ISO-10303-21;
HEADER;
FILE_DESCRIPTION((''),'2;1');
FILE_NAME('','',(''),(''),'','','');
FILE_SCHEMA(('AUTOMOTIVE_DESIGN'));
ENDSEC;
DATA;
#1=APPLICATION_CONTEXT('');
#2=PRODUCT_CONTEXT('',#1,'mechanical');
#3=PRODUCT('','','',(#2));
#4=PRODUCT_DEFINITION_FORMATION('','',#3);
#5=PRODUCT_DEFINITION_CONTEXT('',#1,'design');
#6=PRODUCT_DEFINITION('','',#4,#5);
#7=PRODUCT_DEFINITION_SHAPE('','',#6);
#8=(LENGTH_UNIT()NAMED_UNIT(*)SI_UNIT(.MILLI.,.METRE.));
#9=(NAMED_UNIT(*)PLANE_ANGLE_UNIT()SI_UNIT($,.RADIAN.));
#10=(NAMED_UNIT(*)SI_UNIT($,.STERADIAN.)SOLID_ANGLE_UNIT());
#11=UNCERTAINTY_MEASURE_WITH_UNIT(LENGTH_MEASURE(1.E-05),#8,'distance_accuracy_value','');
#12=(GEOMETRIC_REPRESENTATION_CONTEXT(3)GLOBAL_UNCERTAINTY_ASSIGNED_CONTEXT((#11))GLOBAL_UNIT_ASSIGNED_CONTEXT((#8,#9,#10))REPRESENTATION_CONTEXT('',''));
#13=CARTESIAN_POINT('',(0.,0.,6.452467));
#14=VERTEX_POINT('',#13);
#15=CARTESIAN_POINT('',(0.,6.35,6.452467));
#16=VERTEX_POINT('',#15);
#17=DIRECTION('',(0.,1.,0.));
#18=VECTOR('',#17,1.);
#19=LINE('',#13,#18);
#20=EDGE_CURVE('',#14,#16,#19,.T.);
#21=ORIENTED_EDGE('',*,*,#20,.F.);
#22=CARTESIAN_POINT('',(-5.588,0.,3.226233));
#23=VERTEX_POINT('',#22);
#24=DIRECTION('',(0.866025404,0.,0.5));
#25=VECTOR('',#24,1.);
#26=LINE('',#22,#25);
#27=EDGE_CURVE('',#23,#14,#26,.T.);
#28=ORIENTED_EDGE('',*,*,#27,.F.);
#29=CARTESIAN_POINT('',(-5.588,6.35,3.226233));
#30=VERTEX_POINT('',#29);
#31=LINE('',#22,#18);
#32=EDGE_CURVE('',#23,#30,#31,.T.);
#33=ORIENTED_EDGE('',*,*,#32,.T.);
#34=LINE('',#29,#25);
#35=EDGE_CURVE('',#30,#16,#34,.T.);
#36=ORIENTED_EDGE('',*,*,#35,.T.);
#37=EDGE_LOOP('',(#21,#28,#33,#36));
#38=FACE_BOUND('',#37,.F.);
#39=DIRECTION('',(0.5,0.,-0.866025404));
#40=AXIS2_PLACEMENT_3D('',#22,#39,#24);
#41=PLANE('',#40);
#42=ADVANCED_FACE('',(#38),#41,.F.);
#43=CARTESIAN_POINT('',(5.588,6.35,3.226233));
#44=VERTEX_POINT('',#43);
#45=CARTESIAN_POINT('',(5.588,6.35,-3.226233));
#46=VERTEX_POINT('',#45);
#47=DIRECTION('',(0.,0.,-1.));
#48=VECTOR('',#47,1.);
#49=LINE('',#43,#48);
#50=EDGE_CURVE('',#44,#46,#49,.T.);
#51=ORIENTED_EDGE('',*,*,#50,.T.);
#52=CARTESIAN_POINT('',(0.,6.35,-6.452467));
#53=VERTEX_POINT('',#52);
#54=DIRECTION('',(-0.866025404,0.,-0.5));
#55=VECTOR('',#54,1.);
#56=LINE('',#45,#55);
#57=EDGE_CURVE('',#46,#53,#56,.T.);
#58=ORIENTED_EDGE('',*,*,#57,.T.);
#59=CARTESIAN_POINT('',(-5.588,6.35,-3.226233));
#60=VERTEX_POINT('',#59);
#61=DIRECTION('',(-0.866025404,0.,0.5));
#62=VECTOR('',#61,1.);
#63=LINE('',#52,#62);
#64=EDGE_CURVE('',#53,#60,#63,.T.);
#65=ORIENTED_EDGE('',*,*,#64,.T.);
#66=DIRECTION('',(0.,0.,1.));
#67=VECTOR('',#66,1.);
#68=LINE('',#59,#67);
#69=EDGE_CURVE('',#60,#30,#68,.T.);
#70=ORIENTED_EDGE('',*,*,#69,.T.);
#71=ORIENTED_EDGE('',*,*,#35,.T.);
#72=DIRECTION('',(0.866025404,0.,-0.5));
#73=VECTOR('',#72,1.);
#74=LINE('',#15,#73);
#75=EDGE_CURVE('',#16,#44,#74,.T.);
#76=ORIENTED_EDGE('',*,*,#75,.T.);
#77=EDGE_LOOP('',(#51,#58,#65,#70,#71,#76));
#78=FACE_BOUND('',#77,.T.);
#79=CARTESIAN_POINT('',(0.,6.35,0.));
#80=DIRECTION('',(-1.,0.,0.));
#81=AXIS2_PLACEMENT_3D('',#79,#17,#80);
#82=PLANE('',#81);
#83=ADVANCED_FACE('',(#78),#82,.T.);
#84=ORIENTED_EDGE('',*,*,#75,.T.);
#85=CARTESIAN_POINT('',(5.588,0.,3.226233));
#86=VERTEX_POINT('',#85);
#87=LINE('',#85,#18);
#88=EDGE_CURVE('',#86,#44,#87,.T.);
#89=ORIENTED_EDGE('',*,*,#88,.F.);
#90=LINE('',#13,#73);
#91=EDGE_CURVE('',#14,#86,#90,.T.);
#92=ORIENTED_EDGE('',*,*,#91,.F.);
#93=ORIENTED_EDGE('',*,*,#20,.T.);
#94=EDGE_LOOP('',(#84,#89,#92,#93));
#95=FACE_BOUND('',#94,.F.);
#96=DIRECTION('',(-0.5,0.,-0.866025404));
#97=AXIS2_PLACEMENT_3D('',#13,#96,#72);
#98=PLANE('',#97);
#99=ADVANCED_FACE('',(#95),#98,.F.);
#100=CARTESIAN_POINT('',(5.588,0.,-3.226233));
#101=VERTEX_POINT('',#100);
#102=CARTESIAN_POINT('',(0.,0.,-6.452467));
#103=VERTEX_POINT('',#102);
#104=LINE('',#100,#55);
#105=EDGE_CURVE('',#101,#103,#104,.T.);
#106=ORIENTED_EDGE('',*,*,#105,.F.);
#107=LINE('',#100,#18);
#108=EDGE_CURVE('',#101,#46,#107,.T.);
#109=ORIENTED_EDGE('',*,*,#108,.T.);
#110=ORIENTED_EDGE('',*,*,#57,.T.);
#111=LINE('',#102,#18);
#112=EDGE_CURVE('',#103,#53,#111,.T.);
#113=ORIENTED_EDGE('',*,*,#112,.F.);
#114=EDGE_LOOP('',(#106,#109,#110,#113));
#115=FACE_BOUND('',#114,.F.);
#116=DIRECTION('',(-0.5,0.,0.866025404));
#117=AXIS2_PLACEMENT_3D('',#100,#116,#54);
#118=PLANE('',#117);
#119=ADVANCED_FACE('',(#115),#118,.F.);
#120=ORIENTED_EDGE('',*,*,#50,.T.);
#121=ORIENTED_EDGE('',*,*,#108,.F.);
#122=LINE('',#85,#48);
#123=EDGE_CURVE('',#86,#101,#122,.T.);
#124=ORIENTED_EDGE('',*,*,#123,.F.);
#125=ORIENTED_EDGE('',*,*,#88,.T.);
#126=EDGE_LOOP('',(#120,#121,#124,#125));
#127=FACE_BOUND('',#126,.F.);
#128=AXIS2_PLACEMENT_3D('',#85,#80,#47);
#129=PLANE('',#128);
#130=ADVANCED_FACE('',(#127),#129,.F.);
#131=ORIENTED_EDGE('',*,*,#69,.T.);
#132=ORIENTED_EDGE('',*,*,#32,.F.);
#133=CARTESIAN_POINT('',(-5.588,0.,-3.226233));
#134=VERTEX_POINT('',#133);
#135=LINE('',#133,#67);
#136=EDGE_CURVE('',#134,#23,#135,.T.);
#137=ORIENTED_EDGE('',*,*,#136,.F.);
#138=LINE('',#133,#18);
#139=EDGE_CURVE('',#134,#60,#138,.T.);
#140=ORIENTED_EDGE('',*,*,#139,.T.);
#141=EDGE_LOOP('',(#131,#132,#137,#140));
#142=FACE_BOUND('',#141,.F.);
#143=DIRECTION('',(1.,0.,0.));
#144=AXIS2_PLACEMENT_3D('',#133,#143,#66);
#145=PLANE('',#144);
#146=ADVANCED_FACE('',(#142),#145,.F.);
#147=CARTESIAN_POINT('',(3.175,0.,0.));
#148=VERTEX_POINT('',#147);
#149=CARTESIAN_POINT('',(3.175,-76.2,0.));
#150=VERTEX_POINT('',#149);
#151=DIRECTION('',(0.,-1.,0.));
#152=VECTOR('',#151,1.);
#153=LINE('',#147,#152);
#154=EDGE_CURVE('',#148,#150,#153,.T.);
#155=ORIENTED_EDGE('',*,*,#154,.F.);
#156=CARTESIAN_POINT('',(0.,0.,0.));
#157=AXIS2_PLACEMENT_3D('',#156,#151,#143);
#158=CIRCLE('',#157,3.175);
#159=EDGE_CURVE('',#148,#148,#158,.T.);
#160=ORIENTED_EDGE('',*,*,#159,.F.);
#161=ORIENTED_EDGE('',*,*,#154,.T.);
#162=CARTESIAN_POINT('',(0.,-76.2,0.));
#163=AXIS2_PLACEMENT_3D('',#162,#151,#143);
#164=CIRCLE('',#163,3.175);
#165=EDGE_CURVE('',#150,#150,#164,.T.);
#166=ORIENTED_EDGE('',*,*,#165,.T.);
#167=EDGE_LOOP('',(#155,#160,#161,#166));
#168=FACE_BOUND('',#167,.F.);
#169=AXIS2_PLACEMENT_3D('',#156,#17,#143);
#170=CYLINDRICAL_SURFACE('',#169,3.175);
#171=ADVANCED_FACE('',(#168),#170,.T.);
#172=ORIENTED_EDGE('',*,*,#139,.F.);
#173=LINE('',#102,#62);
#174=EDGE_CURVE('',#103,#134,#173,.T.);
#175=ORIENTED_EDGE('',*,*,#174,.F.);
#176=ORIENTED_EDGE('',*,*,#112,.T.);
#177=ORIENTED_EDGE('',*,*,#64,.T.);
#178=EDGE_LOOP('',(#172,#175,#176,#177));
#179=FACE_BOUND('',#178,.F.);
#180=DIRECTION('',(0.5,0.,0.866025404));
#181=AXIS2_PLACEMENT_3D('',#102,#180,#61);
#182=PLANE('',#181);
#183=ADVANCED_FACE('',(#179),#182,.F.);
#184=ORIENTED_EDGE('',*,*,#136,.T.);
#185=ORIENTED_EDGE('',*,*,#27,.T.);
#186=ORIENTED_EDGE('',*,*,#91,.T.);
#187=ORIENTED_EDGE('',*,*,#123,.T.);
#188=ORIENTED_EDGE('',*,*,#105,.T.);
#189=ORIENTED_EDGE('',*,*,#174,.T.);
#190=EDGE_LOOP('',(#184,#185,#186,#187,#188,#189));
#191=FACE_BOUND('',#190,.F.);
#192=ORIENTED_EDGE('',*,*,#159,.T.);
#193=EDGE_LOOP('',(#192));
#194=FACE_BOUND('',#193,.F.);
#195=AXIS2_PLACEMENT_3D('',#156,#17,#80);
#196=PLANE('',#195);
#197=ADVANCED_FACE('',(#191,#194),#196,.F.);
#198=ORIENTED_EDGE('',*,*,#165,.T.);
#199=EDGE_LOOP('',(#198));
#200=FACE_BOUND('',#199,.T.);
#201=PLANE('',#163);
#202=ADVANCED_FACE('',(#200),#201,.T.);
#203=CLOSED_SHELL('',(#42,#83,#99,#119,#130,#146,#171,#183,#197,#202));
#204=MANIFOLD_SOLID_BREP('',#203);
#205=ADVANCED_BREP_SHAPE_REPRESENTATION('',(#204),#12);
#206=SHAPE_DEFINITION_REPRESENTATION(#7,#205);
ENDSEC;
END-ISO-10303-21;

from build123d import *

# Parameters (mm, degrees)
F0_R     = 3.175
F1_DEPTH = 76.2
F2_R     = 3.175
F3_DEPTH = 6.35


with BuildPart() as f1:
    # F0 (on Front) → F1 (new body)
    with BuildSketch(Plane.XZ):
        Circle(F0_R)
    extrude(amount=F1_DEPTH)

    # F2 (on face) → F3 (join)
    with BuildSketch(Plane(origin=(0, 0, 0), x_dir=(-1, 0, 0), z_dir=(0, 1, 0))):
        Polygon((5.588, -3.2262333042), (5.588, 3.2262333042), (0, 6.4524666085), (-5.588, 3.2262333042), (-5.588, -3.2262333042), (0, -6.4524666085), align=None)
        Circle(F2_R, mode=Mode.SUBTRACT)
        Circle(F2_R)
    extrude(amount=F3_DEPTH)


solid = f1.part
